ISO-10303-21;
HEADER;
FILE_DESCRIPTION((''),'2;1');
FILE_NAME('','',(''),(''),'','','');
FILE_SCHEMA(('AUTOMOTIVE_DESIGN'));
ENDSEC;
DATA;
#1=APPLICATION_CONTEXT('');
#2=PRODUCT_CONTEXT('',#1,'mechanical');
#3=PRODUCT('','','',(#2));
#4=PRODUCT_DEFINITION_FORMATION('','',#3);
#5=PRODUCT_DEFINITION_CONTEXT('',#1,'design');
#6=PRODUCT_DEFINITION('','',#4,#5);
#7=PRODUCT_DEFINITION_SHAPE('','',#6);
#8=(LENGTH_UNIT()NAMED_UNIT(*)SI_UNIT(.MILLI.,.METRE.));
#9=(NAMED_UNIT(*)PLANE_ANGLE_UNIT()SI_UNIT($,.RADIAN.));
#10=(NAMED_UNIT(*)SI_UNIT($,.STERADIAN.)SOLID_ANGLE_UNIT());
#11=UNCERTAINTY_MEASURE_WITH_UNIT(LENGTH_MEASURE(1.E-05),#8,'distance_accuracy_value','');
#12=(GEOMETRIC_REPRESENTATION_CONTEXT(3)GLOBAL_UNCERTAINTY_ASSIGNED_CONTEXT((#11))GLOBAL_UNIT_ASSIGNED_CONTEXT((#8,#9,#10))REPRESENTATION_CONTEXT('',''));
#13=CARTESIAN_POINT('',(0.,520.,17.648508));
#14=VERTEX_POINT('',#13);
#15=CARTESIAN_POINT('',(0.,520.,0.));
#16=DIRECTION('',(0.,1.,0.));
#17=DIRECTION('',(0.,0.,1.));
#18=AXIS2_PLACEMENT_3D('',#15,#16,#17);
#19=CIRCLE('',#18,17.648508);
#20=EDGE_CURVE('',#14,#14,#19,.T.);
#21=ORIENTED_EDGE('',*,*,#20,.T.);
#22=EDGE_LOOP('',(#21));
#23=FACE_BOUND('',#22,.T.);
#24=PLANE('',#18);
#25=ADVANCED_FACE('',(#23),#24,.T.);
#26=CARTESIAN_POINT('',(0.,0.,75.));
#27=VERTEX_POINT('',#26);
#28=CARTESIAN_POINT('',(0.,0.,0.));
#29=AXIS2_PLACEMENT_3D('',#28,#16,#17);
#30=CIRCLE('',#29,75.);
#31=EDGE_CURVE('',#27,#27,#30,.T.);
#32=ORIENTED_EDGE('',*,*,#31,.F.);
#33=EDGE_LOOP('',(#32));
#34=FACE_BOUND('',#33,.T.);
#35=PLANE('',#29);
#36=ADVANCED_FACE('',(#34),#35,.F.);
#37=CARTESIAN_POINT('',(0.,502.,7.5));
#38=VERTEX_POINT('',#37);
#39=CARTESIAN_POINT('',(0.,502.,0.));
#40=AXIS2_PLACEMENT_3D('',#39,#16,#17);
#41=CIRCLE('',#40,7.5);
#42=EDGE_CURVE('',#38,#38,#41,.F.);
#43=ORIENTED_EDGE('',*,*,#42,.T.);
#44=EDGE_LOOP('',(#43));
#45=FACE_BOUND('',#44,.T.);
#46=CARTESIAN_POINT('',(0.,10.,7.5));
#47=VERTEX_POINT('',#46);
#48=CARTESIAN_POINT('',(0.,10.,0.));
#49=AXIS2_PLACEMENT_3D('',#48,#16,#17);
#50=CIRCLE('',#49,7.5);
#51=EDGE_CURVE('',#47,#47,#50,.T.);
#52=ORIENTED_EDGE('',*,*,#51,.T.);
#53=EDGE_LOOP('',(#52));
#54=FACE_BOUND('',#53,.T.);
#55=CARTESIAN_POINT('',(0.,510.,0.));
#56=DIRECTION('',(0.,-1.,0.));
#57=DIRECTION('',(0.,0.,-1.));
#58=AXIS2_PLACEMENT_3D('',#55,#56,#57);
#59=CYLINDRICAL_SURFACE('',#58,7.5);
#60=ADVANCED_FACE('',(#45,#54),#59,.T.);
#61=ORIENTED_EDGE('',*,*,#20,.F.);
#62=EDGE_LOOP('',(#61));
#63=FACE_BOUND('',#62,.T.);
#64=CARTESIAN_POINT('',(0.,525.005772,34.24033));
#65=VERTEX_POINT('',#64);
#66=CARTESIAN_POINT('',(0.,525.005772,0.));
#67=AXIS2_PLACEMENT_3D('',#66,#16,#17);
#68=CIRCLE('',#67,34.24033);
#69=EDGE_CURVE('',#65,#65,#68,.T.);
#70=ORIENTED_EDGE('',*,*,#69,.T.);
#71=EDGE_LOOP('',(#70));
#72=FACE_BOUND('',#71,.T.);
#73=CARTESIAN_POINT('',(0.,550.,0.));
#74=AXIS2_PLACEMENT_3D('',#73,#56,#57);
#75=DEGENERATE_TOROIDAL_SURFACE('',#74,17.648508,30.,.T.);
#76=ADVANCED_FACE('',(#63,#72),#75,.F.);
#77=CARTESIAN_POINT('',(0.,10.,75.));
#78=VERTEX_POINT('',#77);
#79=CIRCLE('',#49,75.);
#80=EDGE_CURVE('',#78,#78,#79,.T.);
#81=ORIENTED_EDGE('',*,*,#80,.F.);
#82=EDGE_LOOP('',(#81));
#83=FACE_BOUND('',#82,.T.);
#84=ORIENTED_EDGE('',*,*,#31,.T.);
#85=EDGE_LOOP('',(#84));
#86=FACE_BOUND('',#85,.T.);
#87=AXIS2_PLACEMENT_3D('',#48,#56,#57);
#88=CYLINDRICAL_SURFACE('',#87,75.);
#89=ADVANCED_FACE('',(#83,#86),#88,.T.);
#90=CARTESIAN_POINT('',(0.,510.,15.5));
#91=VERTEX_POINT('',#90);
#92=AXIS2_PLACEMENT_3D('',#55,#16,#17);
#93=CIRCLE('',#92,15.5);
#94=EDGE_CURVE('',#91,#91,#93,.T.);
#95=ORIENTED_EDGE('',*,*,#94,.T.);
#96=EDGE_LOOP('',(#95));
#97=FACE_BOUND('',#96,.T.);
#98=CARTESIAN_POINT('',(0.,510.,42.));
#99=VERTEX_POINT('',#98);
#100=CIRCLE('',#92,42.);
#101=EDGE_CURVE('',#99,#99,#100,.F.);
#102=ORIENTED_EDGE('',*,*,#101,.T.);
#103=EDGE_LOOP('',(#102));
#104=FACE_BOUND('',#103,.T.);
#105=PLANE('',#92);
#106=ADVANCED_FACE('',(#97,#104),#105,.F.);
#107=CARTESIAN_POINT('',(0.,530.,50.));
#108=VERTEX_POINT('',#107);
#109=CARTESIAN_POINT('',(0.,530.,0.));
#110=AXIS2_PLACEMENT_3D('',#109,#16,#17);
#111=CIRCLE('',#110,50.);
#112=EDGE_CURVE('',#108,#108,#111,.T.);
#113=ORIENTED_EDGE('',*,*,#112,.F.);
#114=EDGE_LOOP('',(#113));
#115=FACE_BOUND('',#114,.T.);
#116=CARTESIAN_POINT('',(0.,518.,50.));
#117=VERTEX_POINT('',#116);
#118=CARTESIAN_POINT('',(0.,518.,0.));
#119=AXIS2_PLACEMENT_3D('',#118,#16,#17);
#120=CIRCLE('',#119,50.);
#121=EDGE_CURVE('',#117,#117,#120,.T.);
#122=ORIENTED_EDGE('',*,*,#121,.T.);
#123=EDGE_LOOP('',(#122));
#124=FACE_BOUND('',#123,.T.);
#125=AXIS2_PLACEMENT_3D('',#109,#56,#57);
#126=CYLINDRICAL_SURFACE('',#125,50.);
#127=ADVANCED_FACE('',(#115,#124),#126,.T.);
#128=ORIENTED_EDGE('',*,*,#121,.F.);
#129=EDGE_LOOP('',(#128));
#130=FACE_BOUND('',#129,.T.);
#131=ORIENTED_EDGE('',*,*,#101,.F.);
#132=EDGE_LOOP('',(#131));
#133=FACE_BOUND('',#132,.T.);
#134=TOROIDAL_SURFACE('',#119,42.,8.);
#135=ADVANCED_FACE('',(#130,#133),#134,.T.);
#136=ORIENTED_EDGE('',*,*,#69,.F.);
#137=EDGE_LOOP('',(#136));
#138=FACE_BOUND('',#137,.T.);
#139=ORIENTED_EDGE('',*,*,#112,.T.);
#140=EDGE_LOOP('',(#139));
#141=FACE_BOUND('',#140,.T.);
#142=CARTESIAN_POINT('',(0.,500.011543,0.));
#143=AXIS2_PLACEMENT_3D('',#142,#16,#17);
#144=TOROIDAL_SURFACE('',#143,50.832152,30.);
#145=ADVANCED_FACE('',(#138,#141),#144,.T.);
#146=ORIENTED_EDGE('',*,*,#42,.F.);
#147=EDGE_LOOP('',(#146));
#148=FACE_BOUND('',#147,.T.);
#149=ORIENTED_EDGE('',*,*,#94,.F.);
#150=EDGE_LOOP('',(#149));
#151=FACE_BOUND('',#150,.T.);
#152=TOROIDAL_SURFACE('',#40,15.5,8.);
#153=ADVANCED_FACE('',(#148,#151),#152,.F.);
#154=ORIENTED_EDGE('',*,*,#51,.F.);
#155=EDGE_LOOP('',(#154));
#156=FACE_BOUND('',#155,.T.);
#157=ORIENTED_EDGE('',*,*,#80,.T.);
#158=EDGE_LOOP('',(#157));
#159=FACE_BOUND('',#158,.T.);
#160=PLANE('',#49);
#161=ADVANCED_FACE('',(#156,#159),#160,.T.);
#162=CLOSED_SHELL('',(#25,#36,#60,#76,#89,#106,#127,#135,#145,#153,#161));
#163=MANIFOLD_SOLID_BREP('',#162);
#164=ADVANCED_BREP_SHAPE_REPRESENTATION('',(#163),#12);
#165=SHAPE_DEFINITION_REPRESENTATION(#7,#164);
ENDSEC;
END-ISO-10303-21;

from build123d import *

# Parameters (mm, degrees)
SKETCH1_R           = 75
BOSS_EXTRUDE1_DEPTH = 10
SKETCH2_R           = 7.5
BOSS_EXTRUDE2_DEPTH = 500
SKETCH3_R           = 50
BOSS_EXTRUDE3_DEPTH = 20
FILLET1_R           = 8
SKETCH4_R           = 40.009187759
CUT_EXTRUDE1_DEPTH  = 10
FILLET3_R           = 30
FILLET4_R           = 30


with BuildPart() as part:
    # Sketch1 → Boss-Extrude1 (new body)
    with BuildSketch(Plane(origin=(0, 0, 0), x_dir=(1, 0, 0), z_dir=(0, 1, 0))):
        with Locations(Location((0, 0, 0), (0, 0, 270))):
            Circle(SKETCH1_R)
    extrude(amount=BOSS_EXTRUDE1_DEPTH)

    # Sketch2 → Boss-Extrude2 (add)
    with BuildSketch(Plane(origin=(0, 10, 0), x_dir=(1, 0, 0), z_dir=(0, 1, 0))):
        with Locations(Location((0, 0, 0), (0, 0, 270))):
            Circle(SKETCH2_R)
    extrude(amount=BOSS_EXTRUDE2_DEPTH)

    # Sketch3 → Boss-Extrude3 (add)
    with BuildSketch(Plane(origin=(0, 510, 0), x_dir=(1, 0, 0), z_dir=(0, 1, 0))):
        with Locations(Location((0, 0, 0), (0, 0, 270))):
            Circle(SKETCH3_R)
    extrude(amount=BOSS_EXTRUDE3_DEPTH)

    # Fillet1
    fillet1_edges = [part.edges().sort_by_distance(p)[0] for p in [
        (0, 510, -7.5),
        (0, 510, -50),
    ]]
    fillet(fillet1_edges, radius=FILLET1_R)

    # Sketch4 → Cut-Extrude1 (cut)
    with BuildSketch(Plane(origin=(0, 530, 0), x_dir=(1, 0, 0), z_dir=(0, 1, 0))):
        with Locations(Location((0, 0, 0), (0, 0, 270))):
            Circle(SKETCH4_R)
    extrude(amount=-CUT_EXTRUDE1_DEPTH, mode=Mode.SUBTRACT)

    # Fillet3
    # the kernel refuses this fillet: 30 mm, written as the material it adds along each edge
    with BuildSketch(Plane(origin=(0, 520, 0), x_dir=(0, 0, 1), z_dir=(-1, 0, 0))) as fillet3_piece_1:
        with BuildLine():
            CenterArc((17.648507984, 30), FILLET3_R, 270, 48.189685104)
            Line((17.648507984, 0), (17.648507984, -0.6))
            Line((17.648507984, -0.6), (40.009187759, -0.6))
            Line((40.009187759, -0.6), (40.609187759, 0))
            ThreePointArc((40.609187759, 0), (40.609187759, 5), (40.456401354, 9.6))
            Line((40.456401354, 9.6), (40.009187759, 10))
        make_face()
    revolve(axis=Axis((0, 520, 0), (0, 1, 0)))

    # Fillet4
    # the kernel refuses this fillet: 30 mm, written as the material it takes off along each edge
    with BuildSketch(Plane(origin=(0, 530, 0), x_dir=(0, 0, 1), z_dir=(-1, 0, 0))) as fillet4_piece_1:
        with BuildLine():
            CenterArc((50.832151794, -29.988456502), FILLET4_R, 91.589496733, 31.987749571)
            Line((50, 0), (49.983356964, 0.59976913))
            ThreePointArc((49.983356964, 0.59976913), (45.004593879, 0.6), (40.009187759, 0.6))
            Line((40.009187759, 0.6), (39.561974163, 0.4))
            ThreePointArc((39.561974163, 0.4), (36.891474301, -2.227646014), (33.908493451, -4.494343686))
            Line((33.908493451, -4.494343686), (34.240329889, -4.994228251))
        make_face()
    revolve(axis=Axis((0, 530, 0), (0, 1, 0)), mode=Mode.SUBTRACT)


solid = part.part
